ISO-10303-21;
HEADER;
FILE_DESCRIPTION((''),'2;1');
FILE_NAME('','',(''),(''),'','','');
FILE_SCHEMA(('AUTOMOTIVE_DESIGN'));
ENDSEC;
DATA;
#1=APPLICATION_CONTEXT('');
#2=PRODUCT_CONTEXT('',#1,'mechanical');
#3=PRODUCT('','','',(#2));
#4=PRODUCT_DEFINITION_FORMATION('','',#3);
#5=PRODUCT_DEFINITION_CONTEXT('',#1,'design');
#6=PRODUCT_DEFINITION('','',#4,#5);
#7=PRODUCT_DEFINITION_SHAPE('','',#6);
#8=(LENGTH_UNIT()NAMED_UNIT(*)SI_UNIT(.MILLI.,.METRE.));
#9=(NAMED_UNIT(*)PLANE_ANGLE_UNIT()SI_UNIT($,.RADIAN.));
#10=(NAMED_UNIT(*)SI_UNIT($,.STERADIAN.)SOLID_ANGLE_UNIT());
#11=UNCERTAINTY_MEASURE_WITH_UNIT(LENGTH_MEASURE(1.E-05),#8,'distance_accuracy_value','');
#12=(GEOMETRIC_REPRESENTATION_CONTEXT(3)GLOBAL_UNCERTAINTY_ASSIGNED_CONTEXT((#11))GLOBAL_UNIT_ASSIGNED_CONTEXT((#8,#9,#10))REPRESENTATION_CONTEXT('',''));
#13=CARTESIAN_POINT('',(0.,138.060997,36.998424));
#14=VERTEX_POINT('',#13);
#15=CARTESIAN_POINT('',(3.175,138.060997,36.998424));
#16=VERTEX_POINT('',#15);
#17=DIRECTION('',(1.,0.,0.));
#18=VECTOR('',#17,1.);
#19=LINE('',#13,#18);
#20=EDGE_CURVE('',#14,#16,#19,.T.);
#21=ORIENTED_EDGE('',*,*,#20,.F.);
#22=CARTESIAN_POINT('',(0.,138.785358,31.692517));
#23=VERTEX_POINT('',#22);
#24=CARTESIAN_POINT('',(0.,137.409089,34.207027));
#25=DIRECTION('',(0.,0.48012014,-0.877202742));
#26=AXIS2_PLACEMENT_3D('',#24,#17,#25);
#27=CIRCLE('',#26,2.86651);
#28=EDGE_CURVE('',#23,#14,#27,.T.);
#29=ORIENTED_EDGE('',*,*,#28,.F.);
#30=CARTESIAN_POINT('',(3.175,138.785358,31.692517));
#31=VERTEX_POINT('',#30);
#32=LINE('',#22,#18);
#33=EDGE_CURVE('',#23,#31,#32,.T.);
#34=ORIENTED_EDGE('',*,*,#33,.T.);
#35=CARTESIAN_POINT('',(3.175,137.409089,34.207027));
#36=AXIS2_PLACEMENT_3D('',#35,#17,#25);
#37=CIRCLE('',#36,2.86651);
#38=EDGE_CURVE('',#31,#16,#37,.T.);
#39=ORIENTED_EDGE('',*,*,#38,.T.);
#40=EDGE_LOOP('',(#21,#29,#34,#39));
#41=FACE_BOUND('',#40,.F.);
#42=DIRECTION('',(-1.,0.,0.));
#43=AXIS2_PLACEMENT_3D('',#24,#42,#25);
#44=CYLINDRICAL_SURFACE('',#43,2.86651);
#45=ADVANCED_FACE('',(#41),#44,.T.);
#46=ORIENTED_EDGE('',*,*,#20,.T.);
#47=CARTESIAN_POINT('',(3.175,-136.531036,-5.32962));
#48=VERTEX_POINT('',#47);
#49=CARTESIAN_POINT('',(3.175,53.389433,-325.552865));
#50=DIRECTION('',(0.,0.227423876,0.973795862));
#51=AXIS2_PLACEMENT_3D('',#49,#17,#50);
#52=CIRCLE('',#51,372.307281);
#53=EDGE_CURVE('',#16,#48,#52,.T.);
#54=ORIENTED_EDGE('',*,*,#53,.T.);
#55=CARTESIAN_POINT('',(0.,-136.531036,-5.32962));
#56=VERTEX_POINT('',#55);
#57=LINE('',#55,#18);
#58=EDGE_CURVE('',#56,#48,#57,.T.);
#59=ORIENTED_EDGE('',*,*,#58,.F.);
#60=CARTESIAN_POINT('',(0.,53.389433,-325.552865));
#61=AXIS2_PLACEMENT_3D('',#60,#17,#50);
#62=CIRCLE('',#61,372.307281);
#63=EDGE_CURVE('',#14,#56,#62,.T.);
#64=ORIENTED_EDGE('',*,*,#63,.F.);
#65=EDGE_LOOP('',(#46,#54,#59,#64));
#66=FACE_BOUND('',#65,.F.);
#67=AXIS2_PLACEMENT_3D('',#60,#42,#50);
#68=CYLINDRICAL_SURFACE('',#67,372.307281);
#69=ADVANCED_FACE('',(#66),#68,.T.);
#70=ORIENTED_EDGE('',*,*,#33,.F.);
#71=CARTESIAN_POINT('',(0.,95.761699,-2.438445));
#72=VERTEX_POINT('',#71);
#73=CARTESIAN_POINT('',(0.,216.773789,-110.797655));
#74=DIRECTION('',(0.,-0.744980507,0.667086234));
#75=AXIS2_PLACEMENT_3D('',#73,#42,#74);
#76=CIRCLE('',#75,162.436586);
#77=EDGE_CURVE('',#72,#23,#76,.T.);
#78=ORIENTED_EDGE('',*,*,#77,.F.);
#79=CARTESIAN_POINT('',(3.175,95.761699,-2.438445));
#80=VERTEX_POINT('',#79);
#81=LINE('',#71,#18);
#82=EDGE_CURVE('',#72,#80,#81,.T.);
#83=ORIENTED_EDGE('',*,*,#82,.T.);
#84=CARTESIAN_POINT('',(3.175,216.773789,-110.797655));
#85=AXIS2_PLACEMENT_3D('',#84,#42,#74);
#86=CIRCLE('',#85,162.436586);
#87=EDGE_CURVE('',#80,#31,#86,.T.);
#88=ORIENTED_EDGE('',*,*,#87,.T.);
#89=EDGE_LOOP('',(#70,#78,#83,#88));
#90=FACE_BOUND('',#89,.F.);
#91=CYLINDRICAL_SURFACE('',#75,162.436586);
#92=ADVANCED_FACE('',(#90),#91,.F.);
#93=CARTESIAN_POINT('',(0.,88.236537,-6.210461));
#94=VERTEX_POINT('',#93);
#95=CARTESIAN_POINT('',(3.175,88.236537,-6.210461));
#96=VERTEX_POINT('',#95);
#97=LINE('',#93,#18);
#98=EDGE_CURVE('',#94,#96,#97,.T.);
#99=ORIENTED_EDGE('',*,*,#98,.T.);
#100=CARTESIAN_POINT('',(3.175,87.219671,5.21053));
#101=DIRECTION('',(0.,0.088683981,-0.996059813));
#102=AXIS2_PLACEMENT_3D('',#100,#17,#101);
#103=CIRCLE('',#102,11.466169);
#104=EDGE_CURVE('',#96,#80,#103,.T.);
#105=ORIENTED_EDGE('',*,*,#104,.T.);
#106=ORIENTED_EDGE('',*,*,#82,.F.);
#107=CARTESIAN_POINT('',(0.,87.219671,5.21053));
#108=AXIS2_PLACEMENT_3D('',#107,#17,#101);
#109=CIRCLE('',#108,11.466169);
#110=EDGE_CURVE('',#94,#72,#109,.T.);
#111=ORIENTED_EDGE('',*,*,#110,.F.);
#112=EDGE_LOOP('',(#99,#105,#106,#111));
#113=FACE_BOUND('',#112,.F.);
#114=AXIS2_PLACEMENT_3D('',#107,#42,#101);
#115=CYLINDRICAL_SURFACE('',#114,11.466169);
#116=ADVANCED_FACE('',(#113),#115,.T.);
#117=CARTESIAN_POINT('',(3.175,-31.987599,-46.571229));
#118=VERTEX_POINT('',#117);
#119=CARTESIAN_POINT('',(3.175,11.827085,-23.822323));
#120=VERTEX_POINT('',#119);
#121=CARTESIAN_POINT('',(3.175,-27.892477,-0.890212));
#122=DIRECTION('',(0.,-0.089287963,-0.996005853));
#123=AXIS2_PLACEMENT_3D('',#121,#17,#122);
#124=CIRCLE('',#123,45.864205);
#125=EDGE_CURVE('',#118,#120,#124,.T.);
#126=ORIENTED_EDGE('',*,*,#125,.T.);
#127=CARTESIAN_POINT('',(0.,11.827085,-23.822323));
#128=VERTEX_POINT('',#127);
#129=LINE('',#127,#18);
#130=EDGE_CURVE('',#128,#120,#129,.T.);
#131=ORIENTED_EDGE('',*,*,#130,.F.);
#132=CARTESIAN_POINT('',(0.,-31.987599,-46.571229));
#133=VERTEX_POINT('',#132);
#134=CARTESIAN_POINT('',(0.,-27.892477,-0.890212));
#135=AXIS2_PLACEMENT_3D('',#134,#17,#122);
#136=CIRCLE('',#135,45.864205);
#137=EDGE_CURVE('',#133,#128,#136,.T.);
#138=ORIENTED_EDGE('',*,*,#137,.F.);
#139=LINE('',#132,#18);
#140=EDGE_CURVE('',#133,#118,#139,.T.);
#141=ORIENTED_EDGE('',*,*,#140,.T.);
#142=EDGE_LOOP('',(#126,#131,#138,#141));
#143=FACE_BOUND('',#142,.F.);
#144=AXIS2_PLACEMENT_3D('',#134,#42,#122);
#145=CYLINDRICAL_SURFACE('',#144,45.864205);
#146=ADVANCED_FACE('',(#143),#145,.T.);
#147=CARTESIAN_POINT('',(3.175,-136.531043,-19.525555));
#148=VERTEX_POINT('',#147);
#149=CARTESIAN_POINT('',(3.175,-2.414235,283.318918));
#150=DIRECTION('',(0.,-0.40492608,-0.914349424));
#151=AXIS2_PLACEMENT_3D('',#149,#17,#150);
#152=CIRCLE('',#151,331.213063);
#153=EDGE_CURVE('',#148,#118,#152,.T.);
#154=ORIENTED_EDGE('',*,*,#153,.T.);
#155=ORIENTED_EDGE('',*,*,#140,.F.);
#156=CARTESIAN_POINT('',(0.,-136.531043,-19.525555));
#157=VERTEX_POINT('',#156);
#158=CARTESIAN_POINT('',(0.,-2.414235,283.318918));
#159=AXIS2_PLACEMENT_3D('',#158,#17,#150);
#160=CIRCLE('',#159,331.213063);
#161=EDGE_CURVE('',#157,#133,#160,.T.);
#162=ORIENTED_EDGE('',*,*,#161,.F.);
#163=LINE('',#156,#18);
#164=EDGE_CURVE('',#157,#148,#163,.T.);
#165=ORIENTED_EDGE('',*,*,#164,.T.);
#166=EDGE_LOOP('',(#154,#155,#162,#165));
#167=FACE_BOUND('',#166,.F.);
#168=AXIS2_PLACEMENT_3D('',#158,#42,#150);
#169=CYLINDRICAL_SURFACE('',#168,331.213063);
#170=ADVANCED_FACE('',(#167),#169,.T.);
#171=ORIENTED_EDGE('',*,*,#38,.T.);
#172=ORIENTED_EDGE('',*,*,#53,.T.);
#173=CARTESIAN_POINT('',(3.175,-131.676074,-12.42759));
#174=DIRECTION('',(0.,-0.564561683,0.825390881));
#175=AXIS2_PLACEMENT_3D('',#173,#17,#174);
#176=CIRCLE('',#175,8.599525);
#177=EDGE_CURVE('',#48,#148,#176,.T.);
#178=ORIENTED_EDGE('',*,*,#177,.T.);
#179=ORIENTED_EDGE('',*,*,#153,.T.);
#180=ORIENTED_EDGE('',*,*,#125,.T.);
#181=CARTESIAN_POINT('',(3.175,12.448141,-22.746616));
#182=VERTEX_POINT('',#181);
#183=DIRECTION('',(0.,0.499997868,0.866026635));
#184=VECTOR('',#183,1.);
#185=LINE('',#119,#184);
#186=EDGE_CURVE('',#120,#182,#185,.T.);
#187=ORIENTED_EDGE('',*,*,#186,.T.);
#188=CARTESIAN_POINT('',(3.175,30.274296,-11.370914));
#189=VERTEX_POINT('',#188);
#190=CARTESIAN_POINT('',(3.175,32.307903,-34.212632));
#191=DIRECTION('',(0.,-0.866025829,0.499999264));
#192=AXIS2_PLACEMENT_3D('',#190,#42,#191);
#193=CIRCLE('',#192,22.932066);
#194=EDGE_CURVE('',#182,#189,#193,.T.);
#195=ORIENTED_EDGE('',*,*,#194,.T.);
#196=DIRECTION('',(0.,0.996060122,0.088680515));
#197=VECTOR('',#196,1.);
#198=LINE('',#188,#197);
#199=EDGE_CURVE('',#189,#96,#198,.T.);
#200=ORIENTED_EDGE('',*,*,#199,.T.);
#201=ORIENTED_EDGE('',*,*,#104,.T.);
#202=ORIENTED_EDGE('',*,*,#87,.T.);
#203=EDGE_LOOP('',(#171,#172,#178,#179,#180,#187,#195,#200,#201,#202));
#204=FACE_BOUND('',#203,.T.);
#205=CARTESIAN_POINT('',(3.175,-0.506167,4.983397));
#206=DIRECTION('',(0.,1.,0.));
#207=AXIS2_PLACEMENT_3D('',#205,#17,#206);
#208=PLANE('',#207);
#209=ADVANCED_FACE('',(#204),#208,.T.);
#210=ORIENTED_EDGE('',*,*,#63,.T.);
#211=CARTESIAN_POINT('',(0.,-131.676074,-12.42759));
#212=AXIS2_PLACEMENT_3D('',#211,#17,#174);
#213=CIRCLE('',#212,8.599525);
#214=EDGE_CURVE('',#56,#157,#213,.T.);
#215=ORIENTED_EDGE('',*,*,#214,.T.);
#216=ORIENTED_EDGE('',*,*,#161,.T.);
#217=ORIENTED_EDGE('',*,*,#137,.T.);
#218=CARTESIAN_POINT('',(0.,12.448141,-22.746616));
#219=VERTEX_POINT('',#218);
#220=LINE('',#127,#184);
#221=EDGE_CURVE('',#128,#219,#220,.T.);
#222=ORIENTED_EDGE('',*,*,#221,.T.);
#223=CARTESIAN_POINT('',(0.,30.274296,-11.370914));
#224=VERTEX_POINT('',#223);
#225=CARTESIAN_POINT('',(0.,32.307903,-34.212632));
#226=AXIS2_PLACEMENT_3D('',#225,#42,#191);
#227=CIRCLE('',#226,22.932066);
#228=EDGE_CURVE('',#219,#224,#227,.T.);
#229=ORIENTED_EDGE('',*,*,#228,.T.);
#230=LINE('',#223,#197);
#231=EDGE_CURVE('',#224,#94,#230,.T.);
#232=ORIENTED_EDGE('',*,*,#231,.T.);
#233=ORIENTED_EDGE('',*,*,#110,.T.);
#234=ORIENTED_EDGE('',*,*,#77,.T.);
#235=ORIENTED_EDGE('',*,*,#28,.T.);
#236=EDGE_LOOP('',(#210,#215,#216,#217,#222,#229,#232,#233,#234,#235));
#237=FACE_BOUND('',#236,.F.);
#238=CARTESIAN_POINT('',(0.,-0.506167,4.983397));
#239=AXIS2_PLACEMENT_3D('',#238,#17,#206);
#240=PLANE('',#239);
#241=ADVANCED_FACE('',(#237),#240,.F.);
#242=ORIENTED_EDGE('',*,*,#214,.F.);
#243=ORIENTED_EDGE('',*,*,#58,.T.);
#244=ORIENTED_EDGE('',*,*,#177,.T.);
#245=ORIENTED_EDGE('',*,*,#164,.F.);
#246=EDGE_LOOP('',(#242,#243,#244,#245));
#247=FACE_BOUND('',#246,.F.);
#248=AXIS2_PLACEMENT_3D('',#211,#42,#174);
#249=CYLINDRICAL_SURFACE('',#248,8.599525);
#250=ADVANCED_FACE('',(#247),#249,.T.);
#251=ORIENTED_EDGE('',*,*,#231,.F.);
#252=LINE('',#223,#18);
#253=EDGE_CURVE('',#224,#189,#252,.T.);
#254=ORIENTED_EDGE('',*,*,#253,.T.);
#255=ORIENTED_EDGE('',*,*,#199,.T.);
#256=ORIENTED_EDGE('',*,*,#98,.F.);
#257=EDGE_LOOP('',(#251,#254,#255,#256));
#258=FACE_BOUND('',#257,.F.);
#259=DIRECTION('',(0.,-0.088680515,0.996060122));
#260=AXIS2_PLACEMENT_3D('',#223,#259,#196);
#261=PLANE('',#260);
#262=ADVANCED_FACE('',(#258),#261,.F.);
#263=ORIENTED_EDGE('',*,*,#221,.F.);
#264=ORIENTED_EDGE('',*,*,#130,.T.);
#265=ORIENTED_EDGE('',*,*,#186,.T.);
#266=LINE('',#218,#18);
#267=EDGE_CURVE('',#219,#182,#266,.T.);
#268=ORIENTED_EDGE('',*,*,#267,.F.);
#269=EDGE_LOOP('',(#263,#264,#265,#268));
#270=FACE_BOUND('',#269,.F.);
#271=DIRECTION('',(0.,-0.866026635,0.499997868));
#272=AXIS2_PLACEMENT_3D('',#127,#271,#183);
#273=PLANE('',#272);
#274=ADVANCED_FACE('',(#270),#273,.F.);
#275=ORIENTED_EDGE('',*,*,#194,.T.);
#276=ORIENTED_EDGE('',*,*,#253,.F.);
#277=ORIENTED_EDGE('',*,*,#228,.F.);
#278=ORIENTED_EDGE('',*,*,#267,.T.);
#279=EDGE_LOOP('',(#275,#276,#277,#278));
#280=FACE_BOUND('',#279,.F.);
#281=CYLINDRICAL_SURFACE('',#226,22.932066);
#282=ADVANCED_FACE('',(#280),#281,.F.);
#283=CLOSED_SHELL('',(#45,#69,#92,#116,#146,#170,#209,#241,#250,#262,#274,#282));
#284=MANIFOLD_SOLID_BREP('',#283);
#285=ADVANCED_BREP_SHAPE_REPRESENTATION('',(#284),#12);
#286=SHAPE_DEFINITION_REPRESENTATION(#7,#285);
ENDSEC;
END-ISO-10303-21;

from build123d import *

# Parameters (mm, degrees)
F1_DEPTH = 3.175


# Not quite as in the source:
# - ends of sketch curves that miss each other by under 0.0002 mm in the source are joined


with BuildPart() as f1:
    # F0 (on Right) → F1 (new body)
    with BuildSketch(Plane.YZ):
        with BuildLine():
            ThreePointArc((95.7616986955, -2.4384445977), (115.8206686741, 16.458433146), (138.7853580017, 31.6925169435))
            ThreePointArc((138.7853580017, 31.6925169435), (140.2492541442, 34.5947643313), (138.0609974389, 36.9984236581))
            ThreePointArc((138.0609974389, 36.9984236581), (-3.331363766, 42.4083585784), (-136.5310363288, -5.3296204889))
            ThreePointArc((-136.5310363288, -5.3296204889), (-140.275599037, -12.4275830619), (-136.5310425411, -19.5255553241))
            ThreePointArc((-136.5310425411, -19.5255553241), (-85.3689517348, -37.3376085714), (-31.987598638, -46.5712291765))
            ThreePointArc((-31.987598638, -46.5712291765), (-6.7583016255, -41.5949042645), (11.8270849627, -23.8223232356))
            Line((11.8270849627, -23.8223232356), (12.4481411913, -22.7466161766))
            ThreePointArc((12.4481411913, -22.7466161766), (19.971713381, -14.8813600309), (30.2742956681, -11.3709138521))
            Line((30.2742956681, -11.3709138521), (88.2365367651, -6.2104608931))
            ThreePointArc((88.2365367651, -6.2104608931), (92.3577760693, -5.0399785829), (95.7616986955, -2.4384445977))
        make_face()
    extrude(amount=F1_DEPTH)


solid = f1.part
